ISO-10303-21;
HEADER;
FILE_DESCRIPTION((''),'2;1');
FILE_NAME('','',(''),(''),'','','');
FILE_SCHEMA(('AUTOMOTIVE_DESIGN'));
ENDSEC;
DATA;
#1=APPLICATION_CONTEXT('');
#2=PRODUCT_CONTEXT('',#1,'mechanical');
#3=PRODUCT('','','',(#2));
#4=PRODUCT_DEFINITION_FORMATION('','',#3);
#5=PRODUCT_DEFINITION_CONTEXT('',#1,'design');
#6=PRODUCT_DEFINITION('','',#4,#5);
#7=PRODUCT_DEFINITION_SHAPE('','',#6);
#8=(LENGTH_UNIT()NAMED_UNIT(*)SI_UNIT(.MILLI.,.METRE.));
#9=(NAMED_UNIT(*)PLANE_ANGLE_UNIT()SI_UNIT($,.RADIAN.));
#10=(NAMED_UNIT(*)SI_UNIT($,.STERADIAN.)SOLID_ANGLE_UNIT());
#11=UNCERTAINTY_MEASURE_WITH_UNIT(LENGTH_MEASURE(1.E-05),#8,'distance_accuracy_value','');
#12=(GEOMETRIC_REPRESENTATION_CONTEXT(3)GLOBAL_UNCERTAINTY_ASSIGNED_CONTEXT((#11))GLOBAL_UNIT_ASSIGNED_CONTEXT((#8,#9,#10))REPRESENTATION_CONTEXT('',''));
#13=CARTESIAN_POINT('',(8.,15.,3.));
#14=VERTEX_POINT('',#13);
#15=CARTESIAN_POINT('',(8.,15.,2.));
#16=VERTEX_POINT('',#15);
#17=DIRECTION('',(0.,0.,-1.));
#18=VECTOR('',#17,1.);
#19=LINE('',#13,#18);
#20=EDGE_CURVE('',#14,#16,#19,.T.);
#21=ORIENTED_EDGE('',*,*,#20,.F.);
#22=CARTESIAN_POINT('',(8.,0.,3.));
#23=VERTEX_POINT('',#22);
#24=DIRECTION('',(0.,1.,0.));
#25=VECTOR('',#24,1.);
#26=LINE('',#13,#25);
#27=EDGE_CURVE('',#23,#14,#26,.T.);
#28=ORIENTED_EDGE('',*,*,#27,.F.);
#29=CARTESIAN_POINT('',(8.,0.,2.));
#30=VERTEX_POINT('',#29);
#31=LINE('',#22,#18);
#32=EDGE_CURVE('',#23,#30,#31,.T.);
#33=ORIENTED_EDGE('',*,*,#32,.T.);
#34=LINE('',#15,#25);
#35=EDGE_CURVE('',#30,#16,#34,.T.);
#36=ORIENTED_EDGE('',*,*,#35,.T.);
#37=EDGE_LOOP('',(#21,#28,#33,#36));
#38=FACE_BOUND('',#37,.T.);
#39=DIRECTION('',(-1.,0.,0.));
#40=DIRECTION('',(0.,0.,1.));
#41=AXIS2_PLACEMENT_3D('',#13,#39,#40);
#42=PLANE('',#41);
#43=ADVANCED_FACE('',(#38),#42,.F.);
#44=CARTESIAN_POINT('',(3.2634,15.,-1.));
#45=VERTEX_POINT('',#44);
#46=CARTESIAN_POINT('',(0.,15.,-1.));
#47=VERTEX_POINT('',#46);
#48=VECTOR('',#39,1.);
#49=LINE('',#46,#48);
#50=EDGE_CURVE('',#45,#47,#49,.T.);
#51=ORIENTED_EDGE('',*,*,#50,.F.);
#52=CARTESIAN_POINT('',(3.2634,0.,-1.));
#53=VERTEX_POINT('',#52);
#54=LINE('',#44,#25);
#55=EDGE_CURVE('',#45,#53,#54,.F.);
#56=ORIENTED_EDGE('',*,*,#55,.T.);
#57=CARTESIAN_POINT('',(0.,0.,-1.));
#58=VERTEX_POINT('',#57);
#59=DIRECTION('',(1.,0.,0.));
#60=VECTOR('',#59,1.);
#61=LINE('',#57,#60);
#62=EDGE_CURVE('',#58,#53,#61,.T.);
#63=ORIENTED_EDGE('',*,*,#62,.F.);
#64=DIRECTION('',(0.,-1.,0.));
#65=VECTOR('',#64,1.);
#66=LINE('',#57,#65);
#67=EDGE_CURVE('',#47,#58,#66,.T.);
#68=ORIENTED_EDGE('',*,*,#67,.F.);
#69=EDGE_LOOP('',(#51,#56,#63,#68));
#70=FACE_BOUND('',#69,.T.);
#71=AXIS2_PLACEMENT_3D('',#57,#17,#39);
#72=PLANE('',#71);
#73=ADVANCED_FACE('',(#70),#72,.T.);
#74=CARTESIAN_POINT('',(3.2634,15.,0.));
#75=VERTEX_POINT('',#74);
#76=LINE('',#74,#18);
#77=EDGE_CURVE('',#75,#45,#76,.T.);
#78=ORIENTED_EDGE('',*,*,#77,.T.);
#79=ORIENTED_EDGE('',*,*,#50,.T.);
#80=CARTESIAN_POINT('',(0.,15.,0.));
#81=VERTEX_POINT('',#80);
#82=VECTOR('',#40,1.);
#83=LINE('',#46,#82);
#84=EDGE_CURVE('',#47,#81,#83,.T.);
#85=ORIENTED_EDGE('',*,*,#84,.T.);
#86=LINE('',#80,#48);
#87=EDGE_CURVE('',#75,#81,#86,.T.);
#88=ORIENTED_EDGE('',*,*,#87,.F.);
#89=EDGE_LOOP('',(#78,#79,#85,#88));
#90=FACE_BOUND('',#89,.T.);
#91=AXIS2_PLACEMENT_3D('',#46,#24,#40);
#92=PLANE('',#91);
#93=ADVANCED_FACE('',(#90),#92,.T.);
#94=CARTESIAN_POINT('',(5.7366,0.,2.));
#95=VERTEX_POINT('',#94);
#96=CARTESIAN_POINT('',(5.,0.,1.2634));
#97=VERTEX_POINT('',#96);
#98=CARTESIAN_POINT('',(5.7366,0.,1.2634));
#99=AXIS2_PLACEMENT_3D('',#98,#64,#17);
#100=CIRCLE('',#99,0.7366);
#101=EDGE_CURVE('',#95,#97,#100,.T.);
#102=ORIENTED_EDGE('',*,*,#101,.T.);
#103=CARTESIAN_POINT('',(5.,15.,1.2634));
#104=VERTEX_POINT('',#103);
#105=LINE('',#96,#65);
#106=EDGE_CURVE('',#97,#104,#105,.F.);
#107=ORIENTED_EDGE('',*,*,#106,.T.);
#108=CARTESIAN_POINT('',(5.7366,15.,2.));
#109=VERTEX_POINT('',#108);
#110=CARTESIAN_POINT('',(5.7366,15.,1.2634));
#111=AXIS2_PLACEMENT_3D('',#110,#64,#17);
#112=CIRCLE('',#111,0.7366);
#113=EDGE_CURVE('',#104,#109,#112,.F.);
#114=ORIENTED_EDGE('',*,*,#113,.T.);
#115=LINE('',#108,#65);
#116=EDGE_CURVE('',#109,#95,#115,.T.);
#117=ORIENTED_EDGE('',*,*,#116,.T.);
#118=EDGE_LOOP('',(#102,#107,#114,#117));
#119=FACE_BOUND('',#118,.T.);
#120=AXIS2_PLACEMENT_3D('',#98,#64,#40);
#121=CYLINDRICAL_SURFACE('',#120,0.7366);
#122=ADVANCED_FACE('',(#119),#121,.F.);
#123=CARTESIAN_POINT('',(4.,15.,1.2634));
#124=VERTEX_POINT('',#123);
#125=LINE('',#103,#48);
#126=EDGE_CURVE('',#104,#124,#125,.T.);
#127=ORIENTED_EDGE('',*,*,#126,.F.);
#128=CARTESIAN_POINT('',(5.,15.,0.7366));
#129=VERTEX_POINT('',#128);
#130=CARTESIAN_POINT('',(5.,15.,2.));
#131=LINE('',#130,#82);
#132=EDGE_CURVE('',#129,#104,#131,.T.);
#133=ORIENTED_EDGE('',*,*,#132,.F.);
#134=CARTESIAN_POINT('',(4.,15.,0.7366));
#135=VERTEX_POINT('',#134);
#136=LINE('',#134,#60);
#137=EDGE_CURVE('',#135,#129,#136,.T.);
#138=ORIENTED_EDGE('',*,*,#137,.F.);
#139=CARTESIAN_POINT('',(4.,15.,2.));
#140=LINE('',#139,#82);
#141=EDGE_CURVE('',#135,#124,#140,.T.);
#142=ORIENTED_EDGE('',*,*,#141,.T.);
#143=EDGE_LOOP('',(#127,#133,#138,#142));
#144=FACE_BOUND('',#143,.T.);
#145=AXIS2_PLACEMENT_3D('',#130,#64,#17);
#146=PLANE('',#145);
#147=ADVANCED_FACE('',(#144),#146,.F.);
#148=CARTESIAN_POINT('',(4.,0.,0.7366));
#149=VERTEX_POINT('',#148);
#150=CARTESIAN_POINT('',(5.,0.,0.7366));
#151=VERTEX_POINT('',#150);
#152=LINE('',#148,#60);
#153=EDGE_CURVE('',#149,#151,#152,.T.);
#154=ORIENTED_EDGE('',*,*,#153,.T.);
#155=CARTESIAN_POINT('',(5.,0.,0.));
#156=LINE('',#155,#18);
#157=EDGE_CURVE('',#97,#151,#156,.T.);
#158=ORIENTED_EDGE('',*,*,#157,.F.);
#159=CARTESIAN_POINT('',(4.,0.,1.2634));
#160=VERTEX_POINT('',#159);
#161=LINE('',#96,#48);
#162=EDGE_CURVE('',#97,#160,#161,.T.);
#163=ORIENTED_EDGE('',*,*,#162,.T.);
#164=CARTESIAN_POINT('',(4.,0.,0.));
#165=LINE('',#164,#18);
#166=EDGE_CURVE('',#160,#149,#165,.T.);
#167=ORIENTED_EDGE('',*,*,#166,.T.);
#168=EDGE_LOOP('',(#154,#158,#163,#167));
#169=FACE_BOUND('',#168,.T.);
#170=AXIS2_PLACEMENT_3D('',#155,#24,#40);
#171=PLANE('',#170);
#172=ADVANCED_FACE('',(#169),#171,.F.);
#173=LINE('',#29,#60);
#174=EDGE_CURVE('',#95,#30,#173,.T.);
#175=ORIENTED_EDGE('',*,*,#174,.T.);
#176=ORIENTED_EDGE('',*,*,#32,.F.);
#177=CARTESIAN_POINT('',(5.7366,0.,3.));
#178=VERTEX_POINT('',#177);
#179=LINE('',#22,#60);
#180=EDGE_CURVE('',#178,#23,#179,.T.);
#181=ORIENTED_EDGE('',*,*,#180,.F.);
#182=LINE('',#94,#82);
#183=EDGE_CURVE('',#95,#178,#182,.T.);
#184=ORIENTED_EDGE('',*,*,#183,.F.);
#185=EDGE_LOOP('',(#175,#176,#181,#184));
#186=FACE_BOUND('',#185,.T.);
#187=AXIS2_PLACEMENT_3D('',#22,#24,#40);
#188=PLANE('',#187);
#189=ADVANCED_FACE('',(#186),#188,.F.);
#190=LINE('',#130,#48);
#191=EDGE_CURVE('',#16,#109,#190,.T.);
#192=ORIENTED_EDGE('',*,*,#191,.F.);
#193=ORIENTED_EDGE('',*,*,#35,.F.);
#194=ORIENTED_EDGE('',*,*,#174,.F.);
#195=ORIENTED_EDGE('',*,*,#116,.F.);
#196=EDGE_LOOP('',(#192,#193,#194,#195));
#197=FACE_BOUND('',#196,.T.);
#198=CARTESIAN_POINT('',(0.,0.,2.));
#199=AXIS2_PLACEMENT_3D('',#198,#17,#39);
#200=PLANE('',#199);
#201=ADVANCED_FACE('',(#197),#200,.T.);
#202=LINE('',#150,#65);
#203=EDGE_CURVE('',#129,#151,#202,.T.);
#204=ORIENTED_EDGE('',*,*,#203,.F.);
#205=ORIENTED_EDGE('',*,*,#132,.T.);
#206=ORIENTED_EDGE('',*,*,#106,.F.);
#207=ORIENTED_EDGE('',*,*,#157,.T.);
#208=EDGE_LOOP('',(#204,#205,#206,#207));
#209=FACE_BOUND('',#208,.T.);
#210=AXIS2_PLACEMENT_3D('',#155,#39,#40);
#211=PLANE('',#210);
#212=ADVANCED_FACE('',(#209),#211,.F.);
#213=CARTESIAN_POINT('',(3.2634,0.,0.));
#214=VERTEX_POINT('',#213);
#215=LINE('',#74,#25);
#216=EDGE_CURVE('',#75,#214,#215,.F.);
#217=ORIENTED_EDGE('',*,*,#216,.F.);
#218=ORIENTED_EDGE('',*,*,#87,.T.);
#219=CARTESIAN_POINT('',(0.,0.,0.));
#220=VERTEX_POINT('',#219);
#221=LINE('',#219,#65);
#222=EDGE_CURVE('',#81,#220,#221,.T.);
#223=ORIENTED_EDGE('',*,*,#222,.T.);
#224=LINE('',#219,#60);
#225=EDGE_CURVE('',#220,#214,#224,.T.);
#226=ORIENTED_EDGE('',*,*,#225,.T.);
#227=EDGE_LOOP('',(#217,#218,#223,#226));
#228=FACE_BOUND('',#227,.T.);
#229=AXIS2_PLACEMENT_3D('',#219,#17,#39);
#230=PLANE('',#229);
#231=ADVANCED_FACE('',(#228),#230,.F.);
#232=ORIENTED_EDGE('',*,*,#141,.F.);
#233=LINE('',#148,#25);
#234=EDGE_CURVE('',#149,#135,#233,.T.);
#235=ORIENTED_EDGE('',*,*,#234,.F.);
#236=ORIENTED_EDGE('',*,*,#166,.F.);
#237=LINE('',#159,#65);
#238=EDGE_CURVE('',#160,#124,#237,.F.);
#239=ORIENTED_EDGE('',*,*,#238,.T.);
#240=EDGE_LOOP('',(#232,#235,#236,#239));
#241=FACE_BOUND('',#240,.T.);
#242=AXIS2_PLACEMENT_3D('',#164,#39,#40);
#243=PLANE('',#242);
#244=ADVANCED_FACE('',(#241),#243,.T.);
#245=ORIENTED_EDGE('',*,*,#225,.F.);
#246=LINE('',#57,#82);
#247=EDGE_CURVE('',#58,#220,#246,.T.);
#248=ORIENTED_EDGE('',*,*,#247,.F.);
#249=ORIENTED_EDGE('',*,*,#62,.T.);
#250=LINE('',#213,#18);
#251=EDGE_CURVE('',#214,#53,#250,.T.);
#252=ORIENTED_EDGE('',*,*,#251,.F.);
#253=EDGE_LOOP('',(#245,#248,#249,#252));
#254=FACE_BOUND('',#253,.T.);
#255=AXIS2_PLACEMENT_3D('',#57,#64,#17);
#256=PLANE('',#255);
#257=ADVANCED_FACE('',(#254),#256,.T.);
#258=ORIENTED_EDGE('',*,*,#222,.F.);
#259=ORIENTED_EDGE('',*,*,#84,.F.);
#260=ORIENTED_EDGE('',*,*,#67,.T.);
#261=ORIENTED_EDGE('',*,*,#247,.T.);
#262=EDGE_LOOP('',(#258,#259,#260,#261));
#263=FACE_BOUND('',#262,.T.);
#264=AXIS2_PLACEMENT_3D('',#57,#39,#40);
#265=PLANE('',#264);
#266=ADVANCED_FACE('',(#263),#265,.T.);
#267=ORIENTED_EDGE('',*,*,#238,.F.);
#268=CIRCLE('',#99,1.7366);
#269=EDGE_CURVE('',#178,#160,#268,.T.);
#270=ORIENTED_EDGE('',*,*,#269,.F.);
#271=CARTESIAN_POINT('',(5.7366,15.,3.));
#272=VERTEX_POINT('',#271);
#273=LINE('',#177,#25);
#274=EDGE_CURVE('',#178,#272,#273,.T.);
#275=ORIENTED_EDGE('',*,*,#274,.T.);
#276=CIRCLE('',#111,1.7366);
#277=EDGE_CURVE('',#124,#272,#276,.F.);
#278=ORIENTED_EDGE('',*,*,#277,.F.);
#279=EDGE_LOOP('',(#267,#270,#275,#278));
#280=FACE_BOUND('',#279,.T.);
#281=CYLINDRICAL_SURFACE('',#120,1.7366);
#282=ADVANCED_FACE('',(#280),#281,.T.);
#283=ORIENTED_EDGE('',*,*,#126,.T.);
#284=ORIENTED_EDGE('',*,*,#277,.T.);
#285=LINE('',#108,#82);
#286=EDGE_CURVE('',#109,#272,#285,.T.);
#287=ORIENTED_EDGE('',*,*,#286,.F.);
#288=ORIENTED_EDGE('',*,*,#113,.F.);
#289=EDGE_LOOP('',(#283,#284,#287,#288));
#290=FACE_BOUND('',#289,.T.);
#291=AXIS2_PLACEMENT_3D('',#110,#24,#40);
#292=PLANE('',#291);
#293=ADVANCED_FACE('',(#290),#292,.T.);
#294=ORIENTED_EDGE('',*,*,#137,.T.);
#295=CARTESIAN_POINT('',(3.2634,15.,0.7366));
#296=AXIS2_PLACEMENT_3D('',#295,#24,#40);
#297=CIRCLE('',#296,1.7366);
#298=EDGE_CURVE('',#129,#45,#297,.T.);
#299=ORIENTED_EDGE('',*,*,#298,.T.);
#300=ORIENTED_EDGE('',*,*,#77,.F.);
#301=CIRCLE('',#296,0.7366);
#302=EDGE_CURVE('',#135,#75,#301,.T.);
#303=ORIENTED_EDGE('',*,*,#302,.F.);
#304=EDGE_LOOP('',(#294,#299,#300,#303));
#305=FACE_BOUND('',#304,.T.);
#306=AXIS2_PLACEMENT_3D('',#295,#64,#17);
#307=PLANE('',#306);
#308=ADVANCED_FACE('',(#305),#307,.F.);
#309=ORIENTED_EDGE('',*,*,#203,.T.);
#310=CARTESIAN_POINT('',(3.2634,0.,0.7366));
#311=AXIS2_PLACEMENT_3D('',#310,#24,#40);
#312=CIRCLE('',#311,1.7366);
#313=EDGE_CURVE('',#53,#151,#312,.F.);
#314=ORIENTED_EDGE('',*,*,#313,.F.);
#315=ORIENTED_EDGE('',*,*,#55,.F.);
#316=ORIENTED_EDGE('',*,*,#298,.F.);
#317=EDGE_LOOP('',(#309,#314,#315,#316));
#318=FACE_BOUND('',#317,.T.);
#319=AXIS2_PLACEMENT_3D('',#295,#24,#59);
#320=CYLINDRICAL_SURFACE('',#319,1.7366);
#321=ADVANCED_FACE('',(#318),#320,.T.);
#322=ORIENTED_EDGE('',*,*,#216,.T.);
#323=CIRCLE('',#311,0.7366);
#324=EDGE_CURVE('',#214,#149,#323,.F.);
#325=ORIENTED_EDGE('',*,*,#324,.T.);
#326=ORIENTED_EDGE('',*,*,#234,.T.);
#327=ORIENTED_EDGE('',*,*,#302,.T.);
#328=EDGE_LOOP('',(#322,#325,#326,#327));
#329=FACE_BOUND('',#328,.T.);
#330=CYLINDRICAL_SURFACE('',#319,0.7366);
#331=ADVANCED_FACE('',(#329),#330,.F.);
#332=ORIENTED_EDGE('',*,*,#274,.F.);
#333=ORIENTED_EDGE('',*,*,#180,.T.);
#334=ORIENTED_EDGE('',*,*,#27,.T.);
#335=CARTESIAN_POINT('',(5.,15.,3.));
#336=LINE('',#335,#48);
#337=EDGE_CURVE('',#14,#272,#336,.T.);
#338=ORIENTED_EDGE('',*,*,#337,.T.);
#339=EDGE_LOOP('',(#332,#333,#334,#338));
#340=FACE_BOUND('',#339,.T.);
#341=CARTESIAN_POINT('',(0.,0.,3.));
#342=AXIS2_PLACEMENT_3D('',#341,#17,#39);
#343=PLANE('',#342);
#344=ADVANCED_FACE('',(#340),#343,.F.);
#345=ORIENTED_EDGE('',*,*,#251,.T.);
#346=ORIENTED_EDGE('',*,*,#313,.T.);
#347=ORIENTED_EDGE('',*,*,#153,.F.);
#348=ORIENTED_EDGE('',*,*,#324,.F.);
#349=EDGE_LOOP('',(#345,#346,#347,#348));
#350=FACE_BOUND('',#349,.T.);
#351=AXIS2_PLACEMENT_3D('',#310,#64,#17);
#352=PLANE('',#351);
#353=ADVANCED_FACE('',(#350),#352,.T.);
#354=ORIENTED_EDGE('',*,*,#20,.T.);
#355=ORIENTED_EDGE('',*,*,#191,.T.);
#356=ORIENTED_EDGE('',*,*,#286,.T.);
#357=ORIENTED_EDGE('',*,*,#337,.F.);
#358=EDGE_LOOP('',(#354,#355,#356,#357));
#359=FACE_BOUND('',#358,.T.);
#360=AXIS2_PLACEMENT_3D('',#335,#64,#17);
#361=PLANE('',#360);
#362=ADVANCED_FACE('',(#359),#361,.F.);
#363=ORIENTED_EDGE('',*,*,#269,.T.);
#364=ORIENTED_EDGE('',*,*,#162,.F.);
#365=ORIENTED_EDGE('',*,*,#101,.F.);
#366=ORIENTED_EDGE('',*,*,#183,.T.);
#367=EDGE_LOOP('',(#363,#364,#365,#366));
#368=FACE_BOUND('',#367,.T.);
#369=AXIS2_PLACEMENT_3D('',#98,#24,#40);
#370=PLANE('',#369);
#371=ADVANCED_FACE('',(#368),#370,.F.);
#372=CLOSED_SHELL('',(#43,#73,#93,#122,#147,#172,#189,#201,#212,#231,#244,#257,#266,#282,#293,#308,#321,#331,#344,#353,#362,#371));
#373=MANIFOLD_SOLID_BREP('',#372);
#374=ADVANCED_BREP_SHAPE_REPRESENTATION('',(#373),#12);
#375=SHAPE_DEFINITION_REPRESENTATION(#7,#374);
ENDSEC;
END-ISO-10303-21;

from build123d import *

# Parameters (mm, degrees)
SKETCH1_W                    = 4
SKETCH1_H                    = 15
BASE_FLANGE1_DEPTH           = 1
EDGE_FLANGE1_STRIP_W         = 5.4732
EDGE_FLANGE1_STRIP_H         = 1
EDGE_FLANGE1_STRIP_CUT_DEPTH = 15
EDGE_FLANGE1_DEPTH           = 15
EDGE_FLANGE2_STRIP_W         = 5.4732
EDGE_FLANGE2_STRIP_H         = 1
EDGE_FLANGE2_STRIP_CUT_DEPTH = 15
EDGE_FLANGE2_DEPTH           = 15


# Sheet-metal steps are written as plain solids
with BuildPart() as part:
    # Sketch1 → Base-Flange1 (new body)
    with BuildSketch(Plane.XY):
        with Locations((2, 7.5)):
            Rectangle(SKETCH1_W, SKETCH1_H)
    extrude(amount=-BASE_FLANGE1_DEPTH)

    # Edge-Flange1 strip (across the edge) → Edge-Flange1 strip cut (cut)
    with BuildSketch(Plane(origin=(4, 0, 0), x_dir=(-1, 0, 0), z_dir=(0, 1, 0))):
        with Locations((-2, -0.5)):
            Rectangle(EDGE_FLANGE1_STRIP_W, EDGE_FLANGE1_STRIP_H)
    extrude(amount=EDGE_FLANGE1_STRIP_CUT_DEPTH, mode=Mode.SUBTRACT)

    # Edge-Flange1 section (across the edge) → Edge-Flange1 (add)
    with BuildSketch(Plane(origin=(4, 0, 0), x_dir=(-1, 0, 0), z_dir=(0, 1, 0))):
        with BuildLine():
            Line((-1, 0.7366), (-1, 2))
            Line((-1, 2), (0, 2))
            Line((0, 2), (0, 0.7366))
            ThreePointArc((0, 0.7366), (0.215745145, 0.215745145), (0.7366, 0))
            Line((0.7366, 0), (0.7366, -1))
            ThreePointArc((0.7366, -1), (-0.491361636, -0.491361636), (-1, 0.7366))
        make_face()
    extrude(amount=EDGE_FLANGE1_DEPTH)

    # Edge-Flange2 strip (across the edge) → Edge-Flange2 strip cut (cut)
    with BuildSketch(Plane(origin=(5, 15, 2), x_dir=(0, 0, -1), z_dir=(0, -1, 0))):
        with Locations((-2, -0.5)):
            Rectangle(EDGE_FLANGE2_STRIP_W, EDGE_FLANGE2_STRIP_H)
    extrude(amount=EDGE_FLANGE2_STRIP_CUT_DEPTH, mode=Mode.SUBTRACT)

    # Edge-Flange2 section (across the edge) → Edge-Flange2 (add)
    with BuildSketch(Plane(origin=(5, 15, 2), x_dir=(0, 0, -1), z_dir=(0, -1, 0))):
        with BuildLine():
            Line((-1, 0.7366), (-1, 3))
            Line((-1, 3), (0, 3))
            Line((0, 3), (0, 0.7366))
            ThreePointArc((0, 0.7366), (0.215745145, 0.215745145), (0.7366, 0))
            Line((0.7366, 0), (0.7366, -1))
            ThreePointArc((0.7366, -1), (-0.491361636, -0.491361636), (-1, 0.7366))
        make_face()
    extrude(amount=EDGE_FLANGE2_DEPTH)


solid = part.part
